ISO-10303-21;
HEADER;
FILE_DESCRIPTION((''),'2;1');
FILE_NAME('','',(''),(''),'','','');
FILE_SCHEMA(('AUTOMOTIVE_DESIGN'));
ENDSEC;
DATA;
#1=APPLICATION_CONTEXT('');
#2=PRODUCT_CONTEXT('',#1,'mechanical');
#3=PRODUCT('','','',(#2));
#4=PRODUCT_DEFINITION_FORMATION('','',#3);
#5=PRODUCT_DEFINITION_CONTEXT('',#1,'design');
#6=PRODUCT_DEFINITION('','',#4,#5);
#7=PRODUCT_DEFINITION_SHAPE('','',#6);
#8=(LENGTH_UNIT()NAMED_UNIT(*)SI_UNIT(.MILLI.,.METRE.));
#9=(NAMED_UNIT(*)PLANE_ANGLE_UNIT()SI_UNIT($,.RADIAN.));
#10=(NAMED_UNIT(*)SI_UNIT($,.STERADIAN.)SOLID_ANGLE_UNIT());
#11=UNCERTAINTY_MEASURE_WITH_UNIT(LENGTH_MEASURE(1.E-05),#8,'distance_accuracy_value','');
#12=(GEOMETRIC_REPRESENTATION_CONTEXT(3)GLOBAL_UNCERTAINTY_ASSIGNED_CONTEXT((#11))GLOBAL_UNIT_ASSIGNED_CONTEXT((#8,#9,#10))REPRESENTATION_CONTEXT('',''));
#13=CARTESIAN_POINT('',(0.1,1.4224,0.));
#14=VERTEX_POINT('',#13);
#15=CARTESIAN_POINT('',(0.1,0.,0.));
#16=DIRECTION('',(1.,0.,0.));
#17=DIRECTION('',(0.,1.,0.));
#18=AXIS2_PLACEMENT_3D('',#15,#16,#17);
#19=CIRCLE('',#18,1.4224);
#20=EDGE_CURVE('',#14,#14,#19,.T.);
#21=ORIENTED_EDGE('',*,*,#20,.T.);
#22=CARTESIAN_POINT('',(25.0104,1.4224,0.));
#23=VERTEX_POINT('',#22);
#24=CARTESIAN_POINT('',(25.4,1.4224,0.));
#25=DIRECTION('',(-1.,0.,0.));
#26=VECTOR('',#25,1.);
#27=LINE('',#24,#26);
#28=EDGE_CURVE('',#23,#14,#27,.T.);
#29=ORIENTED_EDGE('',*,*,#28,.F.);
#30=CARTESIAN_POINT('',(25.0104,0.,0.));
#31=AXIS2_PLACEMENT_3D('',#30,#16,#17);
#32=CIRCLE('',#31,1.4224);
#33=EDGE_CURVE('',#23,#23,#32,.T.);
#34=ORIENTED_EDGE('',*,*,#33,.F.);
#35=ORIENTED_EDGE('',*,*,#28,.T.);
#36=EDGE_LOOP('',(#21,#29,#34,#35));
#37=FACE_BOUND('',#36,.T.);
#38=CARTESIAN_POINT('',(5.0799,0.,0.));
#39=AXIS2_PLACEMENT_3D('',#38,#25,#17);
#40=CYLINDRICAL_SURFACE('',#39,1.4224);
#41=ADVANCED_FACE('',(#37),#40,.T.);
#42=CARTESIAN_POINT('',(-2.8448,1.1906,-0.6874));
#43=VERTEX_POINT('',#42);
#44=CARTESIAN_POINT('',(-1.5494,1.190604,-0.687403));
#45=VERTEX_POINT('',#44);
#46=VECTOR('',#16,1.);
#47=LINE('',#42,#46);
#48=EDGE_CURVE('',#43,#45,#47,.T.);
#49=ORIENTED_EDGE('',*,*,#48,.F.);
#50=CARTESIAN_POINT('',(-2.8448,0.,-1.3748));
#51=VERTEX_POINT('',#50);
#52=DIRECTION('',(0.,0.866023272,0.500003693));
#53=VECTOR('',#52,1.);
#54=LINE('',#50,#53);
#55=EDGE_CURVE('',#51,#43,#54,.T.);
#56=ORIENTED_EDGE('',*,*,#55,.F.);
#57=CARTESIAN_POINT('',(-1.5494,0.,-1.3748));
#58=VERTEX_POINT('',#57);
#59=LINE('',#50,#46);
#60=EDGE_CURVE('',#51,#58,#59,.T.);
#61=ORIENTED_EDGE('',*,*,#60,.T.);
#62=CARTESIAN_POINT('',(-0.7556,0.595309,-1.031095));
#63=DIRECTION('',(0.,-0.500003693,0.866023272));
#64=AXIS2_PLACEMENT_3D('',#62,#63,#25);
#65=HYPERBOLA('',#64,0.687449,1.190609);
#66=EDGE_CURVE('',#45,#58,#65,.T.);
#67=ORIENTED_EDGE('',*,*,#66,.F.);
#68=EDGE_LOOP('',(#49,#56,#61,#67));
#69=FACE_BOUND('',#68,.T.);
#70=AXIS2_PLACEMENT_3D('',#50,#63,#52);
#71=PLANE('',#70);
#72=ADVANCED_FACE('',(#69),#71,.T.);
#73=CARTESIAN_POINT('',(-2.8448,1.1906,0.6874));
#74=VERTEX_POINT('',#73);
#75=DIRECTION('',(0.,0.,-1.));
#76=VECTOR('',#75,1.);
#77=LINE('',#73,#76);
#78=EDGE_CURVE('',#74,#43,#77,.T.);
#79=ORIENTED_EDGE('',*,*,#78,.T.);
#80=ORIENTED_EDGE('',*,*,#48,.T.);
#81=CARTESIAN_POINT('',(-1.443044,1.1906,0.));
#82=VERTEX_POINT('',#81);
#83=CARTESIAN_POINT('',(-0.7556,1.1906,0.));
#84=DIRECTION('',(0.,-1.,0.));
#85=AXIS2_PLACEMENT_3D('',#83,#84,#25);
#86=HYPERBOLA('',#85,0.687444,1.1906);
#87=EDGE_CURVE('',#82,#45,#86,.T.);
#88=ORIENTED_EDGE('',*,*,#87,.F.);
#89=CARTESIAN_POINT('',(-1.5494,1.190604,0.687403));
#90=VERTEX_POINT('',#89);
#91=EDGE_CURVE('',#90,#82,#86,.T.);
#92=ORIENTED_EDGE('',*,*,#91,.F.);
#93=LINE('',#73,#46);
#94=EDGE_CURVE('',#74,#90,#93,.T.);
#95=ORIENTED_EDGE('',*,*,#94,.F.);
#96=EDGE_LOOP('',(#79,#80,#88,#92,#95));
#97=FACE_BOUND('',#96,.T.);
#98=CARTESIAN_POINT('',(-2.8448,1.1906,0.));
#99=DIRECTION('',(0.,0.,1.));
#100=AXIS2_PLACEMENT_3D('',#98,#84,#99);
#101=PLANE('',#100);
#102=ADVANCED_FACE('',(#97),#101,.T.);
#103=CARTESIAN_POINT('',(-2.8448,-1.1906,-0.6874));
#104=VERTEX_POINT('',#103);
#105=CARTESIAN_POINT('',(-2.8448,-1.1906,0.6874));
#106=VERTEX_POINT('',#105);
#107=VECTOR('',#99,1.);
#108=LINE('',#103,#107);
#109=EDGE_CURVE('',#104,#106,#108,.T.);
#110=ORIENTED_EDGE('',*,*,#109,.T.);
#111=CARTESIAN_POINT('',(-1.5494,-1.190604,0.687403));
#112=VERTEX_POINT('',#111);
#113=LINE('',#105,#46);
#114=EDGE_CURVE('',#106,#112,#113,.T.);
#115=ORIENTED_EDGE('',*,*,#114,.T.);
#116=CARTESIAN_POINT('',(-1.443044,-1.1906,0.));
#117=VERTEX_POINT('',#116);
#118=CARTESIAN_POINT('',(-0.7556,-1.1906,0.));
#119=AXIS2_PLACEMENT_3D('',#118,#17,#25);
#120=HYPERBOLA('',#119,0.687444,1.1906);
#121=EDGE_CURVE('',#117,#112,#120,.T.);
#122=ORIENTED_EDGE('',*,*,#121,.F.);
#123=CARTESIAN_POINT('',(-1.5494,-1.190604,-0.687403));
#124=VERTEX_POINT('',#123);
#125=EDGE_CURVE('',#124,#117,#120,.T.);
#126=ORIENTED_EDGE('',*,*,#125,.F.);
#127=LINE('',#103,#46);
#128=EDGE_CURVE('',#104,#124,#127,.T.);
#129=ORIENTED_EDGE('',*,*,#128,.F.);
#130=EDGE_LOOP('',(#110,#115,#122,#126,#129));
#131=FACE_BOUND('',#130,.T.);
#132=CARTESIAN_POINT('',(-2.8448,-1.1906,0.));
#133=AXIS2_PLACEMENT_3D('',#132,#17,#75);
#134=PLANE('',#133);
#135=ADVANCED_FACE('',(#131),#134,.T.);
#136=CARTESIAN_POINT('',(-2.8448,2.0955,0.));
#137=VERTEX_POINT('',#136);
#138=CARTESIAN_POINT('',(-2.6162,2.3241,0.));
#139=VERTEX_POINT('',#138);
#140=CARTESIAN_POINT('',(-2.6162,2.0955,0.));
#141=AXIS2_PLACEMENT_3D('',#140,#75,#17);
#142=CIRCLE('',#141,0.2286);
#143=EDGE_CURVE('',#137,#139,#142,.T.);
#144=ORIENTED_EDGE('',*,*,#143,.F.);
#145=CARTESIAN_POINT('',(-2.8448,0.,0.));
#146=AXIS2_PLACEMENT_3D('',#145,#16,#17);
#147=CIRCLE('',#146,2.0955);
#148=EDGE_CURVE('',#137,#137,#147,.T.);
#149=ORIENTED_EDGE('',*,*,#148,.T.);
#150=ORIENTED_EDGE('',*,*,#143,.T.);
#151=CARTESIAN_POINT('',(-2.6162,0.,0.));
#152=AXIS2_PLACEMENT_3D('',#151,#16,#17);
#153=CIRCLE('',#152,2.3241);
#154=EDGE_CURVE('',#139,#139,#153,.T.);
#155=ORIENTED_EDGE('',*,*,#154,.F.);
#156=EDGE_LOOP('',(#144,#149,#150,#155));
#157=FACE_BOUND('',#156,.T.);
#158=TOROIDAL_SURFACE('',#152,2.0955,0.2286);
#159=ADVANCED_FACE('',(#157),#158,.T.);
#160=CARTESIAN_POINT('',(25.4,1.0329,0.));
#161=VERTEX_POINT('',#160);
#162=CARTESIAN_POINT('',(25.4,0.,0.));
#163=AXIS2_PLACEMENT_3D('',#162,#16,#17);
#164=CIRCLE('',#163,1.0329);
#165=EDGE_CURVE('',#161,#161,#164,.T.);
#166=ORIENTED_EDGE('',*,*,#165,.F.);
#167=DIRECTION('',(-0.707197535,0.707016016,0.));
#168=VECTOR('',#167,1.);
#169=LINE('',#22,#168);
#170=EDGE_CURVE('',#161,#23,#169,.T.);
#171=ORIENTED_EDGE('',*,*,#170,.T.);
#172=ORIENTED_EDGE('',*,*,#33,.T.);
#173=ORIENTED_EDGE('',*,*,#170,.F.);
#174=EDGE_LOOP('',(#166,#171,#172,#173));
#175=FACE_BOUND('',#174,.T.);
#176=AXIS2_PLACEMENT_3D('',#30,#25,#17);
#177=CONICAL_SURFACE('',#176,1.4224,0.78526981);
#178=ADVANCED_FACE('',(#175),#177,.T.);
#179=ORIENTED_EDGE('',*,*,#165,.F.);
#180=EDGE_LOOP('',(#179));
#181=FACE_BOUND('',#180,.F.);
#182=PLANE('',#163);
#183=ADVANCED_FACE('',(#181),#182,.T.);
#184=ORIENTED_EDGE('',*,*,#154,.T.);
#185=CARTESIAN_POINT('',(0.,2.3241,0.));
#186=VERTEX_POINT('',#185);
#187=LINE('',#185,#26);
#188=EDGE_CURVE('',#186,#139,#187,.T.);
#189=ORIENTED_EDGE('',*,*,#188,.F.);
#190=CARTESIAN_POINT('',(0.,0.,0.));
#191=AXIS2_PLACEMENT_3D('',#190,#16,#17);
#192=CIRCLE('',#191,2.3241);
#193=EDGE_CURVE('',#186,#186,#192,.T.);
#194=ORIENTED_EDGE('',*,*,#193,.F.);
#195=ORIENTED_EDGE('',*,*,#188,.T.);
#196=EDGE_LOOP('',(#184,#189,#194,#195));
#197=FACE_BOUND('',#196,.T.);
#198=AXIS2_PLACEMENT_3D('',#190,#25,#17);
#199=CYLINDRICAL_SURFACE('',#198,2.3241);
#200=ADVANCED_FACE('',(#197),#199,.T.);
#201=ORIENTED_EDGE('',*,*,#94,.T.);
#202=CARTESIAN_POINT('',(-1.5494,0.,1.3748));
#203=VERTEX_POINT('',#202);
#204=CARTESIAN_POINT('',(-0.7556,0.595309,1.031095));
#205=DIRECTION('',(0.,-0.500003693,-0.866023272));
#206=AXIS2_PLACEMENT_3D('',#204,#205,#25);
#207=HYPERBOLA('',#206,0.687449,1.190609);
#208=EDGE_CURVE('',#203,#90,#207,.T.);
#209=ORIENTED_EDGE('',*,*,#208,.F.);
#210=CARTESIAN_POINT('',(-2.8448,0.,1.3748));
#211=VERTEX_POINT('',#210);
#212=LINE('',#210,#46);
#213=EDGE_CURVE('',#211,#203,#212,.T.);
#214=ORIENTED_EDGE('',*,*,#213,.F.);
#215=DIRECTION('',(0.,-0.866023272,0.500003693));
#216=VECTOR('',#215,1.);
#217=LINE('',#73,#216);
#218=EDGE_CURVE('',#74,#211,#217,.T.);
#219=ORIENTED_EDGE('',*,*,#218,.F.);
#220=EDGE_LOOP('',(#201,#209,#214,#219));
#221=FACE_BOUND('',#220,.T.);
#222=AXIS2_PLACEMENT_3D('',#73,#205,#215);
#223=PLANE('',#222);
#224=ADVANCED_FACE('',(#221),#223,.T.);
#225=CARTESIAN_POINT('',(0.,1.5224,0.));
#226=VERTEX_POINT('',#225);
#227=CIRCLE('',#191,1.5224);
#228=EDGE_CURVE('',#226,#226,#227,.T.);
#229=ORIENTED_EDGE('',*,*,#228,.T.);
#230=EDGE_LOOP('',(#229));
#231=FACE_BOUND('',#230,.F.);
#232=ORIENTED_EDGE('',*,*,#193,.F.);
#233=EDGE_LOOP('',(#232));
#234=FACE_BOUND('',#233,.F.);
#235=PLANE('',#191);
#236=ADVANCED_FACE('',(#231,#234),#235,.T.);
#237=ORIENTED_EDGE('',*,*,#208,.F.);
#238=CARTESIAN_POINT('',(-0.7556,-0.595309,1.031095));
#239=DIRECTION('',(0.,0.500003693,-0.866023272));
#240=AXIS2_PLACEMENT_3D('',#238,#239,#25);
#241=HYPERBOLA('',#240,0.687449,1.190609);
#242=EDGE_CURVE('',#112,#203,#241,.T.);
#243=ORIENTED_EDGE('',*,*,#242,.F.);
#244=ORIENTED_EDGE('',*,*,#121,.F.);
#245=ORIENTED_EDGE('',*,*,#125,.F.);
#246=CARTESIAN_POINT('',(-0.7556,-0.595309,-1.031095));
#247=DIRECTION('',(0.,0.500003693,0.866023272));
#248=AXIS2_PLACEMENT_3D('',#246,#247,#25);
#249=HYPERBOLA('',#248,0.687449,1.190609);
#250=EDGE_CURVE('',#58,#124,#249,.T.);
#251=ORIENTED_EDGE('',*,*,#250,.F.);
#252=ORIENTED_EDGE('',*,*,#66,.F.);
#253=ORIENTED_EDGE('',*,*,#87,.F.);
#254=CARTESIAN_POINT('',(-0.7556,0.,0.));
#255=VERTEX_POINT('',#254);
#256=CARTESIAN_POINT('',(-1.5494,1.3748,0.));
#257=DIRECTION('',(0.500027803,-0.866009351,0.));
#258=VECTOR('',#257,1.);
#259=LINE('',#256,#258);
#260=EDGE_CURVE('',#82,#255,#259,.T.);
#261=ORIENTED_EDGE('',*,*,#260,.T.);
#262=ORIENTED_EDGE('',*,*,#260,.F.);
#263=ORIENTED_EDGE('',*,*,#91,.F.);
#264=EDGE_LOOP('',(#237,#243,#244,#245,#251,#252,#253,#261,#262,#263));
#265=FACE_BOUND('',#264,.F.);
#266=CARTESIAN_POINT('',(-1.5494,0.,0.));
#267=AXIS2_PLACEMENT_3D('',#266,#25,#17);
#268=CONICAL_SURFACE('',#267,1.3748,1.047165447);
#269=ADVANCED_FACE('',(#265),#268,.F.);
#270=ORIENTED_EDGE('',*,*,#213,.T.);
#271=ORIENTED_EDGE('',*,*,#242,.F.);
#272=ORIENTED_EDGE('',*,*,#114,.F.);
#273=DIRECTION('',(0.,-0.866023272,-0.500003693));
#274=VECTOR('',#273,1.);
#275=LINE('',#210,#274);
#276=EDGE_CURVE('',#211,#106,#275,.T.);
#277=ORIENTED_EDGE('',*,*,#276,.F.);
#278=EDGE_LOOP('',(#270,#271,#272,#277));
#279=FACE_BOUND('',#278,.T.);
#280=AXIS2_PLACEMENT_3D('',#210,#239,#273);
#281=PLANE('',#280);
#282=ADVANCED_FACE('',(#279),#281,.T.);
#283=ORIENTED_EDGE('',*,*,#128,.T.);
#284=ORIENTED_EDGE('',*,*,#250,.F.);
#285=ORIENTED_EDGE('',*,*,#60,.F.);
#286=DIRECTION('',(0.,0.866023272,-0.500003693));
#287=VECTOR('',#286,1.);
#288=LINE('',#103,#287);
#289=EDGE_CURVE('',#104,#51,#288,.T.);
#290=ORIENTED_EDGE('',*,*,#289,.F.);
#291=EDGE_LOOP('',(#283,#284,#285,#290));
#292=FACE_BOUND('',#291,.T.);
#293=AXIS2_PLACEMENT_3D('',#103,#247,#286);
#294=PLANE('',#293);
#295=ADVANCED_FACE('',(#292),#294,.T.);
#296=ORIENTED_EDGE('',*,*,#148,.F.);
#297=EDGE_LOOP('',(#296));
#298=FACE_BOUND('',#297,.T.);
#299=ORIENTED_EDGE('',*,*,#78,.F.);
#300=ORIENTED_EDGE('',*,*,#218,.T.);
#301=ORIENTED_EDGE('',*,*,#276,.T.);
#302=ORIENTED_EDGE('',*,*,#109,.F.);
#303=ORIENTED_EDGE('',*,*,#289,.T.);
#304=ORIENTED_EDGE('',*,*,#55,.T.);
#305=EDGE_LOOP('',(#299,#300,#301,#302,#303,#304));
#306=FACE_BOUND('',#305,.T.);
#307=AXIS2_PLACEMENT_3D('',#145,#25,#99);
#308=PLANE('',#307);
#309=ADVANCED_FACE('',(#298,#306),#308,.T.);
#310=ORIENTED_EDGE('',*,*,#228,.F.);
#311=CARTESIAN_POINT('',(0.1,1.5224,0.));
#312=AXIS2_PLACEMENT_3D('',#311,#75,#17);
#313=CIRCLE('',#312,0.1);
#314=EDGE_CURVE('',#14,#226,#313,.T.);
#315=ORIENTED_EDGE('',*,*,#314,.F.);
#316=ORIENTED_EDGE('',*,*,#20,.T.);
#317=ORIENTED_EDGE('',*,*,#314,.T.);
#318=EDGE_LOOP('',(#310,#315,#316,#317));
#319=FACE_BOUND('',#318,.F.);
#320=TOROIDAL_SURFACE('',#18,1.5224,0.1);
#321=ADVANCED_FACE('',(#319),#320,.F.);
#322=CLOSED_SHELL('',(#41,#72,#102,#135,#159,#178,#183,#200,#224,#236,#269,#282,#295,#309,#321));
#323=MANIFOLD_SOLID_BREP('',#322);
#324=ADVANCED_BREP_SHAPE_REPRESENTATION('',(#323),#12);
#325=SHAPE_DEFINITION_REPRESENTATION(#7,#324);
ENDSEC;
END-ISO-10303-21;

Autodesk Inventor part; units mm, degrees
ref_plane "YZ Plane" through (0, 0, 0) normal (1, 0, 0) x (0, 1, 0)
ref_plane "XZ Plane" through (0, 0, 0) normal (0, 1, 0) x (-1, 0, 0)
sketch "Sketch1" plane through (0, 0, 0) normal (0, 0, 1) x (1, 0, 0)
  line L0 (-0.7556, 0) -> (25.4, 0)
  line L1 (25.4, 0) -> (25.4, 1.4224)
  line L2 (25.4, 1.4224) -> (6.35, 1.4224)
  line L3 (6.35, 1.4224) -> (5.0799, 1.4224)
  line L4 (5.0799, 1.4224) -> (0, 1.4224)
  line L5 (0, 1.4224) -> (0, 2.3241)
  line L6 (0, 2.3241) -> (-2.8448, 2.3241)
  line L7 (-2.8448, 2.3241) -> (-2.8448, 1.3748)
  line L8 (-2.8448, 1.3748) -> (-1.5494, 1.3748)
  line L9 (-1.5494, 1.3748) -> (-0.7556, 0)
  line L10 (-8.4938, 0) -> (31.049, 0) projected
  line L11 (0, -0.4648) -> (0, 2.7889) projected
  line L12 (6.35, 1.4224) -> (0, 1.4224) construction
  dimension "d1" = 19.05
  dimension "d2" = 1.2701
  dimension "d3" = 2.8448
  dimension "d4" = 1.2954
  dimension "d5" = 60
  dimension "d6" = 2.8448
  dimension "d7" = 2.8448
  dimension "d8" = 2.7496
  dimension "d9" = 4.6482
  dimension "d26" = 25.4
revolve "Body" add sketch "Sketch1" angle 360 about axis through (-0.7556, 0, 0) along (1, 0, 0)
sketch "Sketch2" plane through (-2.8448, 0, 0) normal (-1, 0, 0) x (0, 0, 1)
  circle A0 centre (0, 0) radius 1.3748 projected
  line L0 (0, -3.2537) -> (0, 3.2537) projected
  line L1 (-3.2537, 0) -> (3.2537, 0) projected
  line L2 (1.3748, 0) -> (0.6874, -1.1906)
  line L3 (0.6874, -1.1906) -> (-0.6874, -1.1906)
  line L4 (-0.6874, -1.1906) -> (-1.3748, 0)
  line L5 (-1.3748, 0) -> (-0.6874, 1.1906)
  line L6 (-0.6874, 1.1906) -> (0.6874, 1.1906)
  line L7 (0.6874, 1.1906) -> (1.3748, 0)
  point P0 (0, 0)
extrude "Slot" add sketch "Sketch2" against normal up to next contours L7 A0 | A0 L2 | L6 L0 A0 | A0 L0 L3 | L0 L6 A0 | A0 L3 L0 | L4 A0 | A0 L5
fillet "Fillet1" radius 0.2286 1 edges at (-2.8448, -2.3241, 0)
thread "Thread" size "4-40 UNC" class "2A" standard "ANSI Unified Screw Threads" length 19.05
chamfer "Chamfer1" distance 0.3895 distance2 0.3896 1 edges at (25.4, -1.4224, 0) measured on face at (25.4, 0.2736, 0.8712)
ref_plane "Work Plane1" through (29, 0, 0) normal (0, -1, 0) x (1, 0, 0)
fillet "Fillet2" radius 0.1 1 edges at (0, -1.4224, 0)
equation "\"d1\" = GEL"
equation "\"d3\" = KOH"
equation "\"d4\" = INTI"
equation "\"d6\" = GD"
equation "\"d7\" = BDM"
equation "\"d8\" = 1.1547 * SW"
equation "\"d9\" = KOD"
equation "\"d26\" = NLG"
equation "\"d30\" = R"
equation "\"d17\" = RR"
equation "\"d13\" = GEL"
equation "\"d15\" = -0.5 * SPD + 0.5 * GD"
equation "\"d16\" = GUL"
equation "\"GD\" = NND"
equation "\"NLG\" = 25.4"
equation "\"GEL\" = 19.05"
equation "\"KOD\" = 4.6482"
equation "\"KOH\" = NND"
equation "\"INTI\" = 1.2954"
equation "\"GAL\" = 1.27"
equation "\"GUL\" = 0.38964"
equation "\"BDM\" = NND"
equation "\"SW\" = 2.38125"
equation "\"RR\" = 0.2286"
equation "\"SPD\" = GD1"
equation "\"R\" = 0.1"
equation "\"PHH\" = 0.1 * NND"
equation "\"THREADDIA\" = 2.8448"
equation "\"FAWI\" = 45deg"
equation "\"NND\" = 2.8448"
equation "\"E0\" = 1.155 * SW"
equation "\"FAWI1\" = 30deg"
equation "\"TOA\" = 30deg"
equation "\"GD1\" = 2.06573"
properties part number "Unbrako - 4 x 1" material "Steel, Mild"
